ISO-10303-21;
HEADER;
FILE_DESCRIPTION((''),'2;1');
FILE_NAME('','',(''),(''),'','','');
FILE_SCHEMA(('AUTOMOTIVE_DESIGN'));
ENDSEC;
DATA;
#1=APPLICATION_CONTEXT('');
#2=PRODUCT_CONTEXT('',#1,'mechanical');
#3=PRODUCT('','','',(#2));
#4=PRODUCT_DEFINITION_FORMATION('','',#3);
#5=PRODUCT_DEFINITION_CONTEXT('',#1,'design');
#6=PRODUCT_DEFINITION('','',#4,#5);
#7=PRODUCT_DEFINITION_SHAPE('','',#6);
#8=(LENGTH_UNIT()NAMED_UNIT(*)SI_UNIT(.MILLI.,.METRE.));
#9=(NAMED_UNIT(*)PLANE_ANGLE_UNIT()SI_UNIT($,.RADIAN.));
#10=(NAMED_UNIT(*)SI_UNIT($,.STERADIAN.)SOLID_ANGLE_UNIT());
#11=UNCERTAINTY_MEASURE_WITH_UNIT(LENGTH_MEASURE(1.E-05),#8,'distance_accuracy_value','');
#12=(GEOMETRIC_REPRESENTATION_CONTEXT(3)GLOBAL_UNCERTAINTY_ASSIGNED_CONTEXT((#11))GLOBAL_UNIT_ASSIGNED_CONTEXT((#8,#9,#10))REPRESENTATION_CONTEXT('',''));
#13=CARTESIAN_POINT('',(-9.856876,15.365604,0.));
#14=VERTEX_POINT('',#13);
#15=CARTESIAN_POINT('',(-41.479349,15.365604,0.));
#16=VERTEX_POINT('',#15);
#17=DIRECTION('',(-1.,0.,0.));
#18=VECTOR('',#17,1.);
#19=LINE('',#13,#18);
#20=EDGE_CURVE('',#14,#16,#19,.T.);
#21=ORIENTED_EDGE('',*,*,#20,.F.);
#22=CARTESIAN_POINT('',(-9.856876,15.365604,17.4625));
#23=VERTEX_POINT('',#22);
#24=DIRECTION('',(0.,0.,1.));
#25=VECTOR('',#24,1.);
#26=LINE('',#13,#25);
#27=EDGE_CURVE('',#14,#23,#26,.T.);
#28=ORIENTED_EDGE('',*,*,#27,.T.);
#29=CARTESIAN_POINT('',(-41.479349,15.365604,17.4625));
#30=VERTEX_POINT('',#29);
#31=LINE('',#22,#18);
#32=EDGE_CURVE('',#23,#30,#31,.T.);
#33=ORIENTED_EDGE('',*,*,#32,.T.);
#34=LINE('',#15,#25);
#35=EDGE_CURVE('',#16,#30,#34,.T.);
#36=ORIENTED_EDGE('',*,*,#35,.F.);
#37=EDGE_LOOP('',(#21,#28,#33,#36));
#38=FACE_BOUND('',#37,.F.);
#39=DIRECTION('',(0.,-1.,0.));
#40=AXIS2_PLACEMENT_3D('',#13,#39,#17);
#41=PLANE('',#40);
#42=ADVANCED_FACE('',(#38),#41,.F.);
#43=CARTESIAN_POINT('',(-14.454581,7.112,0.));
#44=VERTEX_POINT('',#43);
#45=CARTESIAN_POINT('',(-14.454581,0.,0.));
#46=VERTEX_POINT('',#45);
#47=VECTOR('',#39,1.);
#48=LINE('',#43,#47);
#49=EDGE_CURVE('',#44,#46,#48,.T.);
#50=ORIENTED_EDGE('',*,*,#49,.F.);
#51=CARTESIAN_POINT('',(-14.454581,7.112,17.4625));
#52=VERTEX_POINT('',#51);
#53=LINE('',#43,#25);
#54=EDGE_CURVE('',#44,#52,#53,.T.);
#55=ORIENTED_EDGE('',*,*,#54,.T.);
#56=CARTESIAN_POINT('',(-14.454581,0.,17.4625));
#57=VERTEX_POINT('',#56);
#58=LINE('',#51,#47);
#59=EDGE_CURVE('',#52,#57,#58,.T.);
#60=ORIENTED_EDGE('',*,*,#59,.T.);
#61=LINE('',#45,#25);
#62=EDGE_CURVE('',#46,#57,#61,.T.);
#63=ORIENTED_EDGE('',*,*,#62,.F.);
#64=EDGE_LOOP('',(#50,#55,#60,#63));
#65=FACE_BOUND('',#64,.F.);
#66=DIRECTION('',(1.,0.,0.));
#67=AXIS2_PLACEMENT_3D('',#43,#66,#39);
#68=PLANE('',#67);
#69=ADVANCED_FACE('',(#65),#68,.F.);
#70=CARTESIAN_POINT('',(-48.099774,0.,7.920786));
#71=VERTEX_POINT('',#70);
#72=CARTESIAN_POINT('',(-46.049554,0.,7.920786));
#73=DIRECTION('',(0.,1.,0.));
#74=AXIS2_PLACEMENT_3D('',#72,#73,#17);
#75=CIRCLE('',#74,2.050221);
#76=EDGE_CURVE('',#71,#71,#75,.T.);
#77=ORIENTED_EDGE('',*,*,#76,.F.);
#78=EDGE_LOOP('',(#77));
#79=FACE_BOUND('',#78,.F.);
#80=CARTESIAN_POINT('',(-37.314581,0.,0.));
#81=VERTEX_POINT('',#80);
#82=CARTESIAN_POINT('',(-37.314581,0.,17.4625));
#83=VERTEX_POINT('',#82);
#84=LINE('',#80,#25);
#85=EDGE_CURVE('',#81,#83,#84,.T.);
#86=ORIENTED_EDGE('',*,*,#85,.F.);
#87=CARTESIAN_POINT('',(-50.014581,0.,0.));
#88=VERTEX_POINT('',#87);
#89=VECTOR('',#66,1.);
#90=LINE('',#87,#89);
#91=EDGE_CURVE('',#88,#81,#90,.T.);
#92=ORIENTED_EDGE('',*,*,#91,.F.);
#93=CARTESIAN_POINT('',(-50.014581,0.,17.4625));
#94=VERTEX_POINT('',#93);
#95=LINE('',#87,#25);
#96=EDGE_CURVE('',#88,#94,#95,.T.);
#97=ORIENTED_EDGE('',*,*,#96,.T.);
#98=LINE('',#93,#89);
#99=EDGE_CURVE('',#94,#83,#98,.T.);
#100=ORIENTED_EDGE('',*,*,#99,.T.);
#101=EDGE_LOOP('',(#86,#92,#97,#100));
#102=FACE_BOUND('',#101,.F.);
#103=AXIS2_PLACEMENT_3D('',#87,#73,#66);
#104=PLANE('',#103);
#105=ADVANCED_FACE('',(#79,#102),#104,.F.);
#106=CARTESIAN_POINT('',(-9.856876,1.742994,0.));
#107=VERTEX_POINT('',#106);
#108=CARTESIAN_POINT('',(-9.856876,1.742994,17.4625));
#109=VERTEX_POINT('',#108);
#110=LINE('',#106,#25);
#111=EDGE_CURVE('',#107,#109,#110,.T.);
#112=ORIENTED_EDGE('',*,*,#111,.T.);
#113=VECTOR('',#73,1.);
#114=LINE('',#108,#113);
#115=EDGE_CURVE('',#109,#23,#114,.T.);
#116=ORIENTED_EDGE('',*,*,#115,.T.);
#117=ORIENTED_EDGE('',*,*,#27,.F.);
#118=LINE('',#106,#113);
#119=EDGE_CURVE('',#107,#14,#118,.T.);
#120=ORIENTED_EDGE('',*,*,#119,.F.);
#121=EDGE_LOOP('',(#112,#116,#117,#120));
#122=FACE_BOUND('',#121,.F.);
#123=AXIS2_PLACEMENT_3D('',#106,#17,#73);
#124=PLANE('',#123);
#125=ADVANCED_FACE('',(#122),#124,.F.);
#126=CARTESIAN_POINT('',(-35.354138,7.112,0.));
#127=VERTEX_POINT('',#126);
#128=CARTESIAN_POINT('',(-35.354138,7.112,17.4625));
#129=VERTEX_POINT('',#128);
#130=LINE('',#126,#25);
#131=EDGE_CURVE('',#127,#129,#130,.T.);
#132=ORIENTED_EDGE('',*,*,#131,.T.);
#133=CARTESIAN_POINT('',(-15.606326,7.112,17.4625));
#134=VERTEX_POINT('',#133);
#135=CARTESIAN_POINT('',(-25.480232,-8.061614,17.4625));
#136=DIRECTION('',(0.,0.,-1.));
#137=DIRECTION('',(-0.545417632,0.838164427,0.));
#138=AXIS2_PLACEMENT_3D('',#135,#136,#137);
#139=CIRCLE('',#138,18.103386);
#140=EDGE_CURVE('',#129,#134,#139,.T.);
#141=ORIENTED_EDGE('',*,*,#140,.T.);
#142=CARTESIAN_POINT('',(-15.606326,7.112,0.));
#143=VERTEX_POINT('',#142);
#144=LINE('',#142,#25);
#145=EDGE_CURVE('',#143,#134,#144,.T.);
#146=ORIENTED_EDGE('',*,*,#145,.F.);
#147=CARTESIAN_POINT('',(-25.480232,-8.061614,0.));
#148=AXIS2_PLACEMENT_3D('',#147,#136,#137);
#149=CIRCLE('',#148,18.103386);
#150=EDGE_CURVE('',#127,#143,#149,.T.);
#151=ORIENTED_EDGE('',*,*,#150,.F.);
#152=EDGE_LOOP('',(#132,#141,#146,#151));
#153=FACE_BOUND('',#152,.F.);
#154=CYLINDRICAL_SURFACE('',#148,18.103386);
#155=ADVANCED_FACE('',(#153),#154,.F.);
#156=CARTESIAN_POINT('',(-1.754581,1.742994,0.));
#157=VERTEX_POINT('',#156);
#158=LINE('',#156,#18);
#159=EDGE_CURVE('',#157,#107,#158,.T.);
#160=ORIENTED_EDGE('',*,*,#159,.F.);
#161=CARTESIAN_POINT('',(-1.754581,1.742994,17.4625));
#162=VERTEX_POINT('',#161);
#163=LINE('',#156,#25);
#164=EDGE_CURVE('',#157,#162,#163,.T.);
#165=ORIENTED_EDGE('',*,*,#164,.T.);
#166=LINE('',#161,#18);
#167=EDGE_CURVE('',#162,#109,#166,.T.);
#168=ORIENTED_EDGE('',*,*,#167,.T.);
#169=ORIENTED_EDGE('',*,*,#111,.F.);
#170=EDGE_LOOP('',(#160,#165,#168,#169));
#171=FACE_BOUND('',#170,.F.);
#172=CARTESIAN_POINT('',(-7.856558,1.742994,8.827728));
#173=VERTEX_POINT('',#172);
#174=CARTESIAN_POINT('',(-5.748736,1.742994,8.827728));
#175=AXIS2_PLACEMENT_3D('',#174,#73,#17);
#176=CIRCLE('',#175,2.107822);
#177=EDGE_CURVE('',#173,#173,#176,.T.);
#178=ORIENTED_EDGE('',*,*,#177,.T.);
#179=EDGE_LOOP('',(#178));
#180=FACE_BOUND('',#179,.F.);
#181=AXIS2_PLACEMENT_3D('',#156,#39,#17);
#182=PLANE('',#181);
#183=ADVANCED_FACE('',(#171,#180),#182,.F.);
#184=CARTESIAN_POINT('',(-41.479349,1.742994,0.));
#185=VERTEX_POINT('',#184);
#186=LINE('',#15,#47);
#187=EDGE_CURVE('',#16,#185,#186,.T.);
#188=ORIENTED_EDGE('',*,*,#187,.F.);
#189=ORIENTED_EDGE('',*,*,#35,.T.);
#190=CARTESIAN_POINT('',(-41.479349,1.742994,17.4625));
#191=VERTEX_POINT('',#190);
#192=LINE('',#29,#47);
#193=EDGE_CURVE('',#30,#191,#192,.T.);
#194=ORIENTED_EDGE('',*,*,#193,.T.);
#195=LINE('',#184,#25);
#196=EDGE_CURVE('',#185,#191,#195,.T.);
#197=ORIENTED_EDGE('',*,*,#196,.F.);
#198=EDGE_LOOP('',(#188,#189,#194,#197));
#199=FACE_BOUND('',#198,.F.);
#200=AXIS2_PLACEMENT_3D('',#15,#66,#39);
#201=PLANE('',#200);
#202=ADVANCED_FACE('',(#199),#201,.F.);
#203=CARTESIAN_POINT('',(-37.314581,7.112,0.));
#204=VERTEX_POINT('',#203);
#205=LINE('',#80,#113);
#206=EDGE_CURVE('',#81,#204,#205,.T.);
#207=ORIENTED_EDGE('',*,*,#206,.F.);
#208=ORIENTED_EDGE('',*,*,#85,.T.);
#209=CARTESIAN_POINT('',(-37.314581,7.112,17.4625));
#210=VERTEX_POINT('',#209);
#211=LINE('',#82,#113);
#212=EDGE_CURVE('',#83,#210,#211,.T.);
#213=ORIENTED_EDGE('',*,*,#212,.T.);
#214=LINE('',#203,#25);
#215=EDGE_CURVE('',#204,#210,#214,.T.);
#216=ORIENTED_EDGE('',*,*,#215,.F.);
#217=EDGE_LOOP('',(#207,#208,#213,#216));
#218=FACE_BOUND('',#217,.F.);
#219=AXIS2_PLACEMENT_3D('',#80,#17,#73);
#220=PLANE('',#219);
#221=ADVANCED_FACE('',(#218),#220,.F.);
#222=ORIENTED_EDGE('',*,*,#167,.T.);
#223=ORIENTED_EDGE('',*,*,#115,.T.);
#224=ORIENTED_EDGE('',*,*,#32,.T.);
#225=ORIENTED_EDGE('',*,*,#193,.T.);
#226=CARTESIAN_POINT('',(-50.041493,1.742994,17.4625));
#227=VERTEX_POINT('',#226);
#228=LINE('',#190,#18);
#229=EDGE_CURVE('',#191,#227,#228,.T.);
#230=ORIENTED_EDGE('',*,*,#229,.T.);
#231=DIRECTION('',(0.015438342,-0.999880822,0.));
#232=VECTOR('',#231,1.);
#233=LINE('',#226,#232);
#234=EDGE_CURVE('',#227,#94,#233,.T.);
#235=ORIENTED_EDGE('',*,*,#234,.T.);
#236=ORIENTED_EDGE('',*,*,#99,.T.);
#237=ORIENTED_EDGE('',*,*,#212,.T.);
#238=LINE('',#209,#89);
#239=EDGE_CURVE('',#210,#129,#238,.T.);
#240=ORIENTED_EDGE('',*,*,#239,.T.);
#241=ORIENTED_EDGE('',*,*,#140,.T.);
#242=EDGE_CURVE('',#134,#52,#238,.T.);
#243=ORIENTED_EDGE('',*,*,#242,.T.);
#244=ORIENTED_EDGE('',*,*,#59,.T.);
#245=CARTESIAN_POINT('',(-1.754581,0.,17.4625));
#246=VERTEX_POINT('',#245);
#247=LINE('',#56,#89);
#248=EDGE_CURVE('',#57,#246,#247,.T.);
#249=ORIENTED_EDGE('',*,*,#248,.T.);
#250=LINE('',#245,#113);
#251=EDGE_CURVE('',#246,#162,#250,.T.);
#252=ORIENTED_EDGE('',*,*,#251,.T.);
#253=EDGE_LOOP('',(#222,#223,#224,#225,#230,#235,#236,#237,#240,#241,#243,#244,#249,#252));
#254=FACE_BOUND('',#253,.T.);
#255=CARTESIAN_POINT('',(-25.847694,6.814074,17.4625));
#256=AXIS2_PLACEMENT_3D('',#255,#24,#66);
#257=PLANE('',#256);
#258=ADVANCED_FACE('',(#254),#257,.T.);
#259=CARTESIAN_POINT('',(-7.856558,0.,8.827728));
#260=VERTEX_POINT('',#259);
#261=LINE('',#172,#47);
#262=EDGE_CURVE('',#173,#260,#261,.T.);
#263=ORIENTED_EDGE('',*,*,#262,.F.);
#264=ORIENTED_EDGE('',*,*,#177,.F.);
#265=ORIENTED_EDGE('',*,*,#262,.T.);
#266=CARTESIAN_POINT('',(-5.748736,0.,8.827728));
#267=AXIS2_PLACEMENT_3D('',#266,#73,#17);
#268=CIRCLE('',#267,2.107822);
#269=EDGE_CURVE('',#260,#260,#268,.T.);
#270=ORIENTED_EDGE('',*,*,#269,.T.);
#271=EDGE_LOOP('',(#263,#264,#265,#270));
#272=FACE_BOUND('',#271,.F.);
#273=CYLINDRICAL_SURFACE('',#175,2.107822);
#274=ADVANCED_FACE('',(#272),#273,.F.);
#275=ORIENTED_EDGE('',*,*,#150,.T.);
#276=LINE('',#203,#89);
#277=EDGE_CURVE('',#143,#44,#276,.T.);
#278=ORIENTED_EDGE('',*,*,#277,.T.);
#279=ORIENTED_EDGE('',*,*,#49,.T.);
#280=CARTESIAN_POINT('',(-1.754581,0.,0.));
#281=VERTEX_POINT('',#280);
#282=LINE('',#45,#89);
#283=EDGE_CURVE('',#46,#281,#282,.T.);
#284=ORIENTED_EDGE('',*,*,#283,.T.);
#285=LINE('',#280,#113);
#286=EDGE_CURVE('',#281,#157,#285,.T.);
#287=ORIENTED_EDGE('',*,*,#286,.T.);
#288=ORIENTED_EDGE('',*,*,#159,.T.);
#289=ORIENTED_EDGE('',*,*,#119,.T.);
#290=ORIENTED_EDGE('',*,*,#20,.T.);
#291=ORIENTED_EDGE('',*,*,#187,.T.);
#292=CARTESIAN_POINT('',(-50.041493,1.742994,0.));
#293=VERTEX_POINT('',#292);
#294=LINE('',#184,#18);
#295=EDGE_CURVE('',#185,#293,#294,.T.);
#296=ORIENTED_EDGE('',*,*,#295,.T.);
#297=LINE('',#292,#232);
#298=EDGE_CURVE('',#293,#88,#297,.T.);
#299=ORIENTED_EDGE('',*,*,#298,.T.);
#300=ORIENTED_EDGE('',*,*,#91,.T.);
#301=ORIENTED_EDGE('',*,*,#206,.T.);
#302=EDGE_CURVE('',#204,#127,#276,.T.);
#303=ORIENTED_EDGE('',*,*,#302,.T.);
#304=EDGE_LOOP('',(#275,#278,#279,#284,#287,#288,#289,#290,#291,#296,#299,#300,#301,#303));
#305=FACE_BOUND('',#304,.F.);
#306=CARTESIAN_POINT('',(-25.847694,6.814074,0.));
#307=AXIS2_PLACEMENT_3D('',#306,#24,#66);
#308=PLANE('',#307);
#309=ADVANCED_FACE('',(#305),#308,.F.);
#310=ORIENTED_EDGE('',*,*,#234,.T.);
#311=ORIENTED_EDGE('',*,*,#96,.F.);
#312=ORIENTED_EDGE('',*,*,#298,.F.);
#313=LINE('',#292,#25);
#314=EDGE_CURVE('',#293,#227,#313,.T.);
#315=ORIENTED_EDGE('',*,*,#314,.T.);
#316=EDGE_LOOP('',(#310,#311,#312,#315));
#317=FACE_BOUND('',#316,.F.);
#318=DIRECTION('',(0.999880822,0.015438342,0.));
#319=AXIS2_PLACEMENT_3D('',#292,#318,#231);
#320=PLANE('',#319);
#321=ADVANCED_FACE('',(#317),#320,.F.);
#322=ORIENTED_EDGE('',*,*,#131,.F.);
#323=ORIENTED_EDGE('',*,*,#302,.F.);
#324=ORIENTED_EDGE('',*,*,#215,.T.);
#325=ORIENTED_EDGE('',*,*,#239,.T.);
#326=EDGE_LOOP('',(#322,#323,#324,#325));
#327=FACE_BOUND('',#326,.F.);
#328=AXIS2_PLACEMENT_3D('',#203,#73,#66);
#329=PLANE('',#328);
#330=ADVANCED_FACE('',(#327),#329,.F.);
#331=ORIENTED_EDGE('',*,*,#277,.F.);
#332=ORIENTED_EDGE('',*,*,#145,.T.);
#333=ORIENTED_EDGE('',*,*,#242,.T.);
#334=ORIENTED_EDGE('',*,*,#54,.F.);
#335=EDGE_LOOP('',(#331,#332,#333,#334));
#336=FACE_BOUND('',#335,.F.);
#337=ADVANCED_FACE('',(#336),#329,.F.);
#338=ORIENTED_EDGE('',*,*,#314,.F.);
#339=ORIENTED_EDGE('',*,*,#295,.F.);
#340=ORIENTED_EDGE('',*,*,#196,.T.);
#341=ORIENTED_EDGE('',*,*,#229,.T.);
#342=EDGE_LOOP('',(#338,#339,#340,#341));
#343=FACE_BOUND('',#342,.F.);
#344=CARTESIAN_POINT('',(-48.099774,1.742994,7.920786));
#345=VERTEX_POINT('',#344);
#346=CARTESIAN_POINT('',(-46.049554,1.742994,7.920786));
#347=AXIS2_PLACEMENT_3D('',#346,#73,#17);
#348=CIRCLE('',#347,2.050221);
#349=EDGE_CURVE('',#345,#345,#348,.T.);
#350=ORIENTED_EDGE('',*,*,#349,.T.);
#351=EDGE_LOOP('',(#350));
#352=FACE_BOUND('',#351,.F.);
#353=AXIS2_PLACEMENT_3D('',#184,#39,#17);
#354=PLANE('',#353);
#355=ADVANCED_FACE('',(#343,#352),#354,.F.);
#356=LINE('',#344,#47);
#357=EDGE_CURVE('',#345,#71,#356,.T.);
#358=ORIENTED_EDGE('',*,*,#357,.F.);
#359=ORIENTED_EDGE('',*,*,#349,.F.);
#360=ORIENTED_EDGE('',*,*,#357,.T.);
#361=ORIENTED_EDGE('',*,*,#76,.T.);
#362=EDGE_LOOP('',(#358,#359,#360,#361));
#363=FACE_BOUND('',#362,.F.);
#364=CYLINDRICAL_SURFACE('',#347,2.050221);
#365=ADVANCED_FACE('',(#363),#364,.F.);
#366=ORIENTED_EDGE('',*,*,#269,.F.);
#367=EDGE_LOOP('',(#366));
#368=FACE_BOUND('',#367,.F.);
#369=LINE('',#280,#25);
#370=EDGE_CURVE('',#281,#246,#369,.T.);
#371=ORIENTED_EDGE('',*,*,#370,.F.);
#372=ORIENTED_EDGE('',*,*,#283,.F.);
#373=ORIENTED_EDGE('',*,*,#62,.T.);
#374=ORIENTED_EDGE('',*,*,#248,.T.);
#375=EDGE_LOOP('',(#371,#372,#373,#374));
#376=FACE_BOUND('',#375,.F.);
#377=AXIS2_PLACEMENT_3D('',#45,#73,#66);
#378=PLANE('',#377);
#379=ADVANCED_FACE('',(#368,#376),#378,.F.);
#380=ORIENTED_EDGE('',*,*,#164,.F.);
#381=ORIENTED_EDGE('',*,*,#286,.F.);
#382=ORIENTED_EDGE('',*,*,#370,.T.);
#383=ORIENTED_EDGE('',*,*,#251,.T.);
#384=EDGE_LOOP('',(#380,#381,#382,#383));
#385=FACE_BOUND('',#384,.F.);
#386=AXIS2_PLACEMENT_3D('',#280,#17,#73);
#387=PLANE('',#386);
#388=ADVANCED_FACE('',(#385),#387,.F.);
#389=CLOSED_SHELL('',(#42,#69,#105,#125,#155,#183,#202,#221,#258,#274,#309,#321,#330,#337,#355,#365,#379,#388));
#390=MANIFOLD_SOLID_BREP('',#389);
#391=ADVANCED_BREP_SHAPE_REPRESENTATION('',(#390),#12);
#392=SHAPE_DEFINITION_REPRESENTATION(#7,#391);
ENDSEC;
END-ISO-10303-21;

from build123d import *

# Parameters (mm, degrees)
F1_DEPTH = 17.4625
F2_R     = 2.1078217737
F3_DEPTH = 25.4
F4_R     = 2.0502205364
F5_DEPTH = 25.4
F7_DEPTH = 25.4


# Not quite as in the source:
# - a length typed as a fraction of an inch, garbled in the dataset ("3 / 203.2 mm" for 3/8 in), is restored
# - a feature names something its author has since deleted; it is built from what else it names


with BuildPart() as f1:
    # F0 (on Top) → F1 (new body)
    with BuildSketch(Plane.XY):
        Polygon((-14.4545807227, 0), (-1.7545807227, 0), (-1.7545807227, 1.7429942964), (-9.8568759859, 1.7429942964), (-9.8568759859, 15.3656043112), (-41.4793491364, 15.3656043112), (-41.4793491364, 1.7429942964), (-50.0414928719, 1.7429942964), (-50.0145807227, 0), (-37.3145807227, 0), (-37.3145807227, 7.112), (-14.4545807227, 7.112), align=None)
    extrude(amount=F1_DEPTH)

    # F2 (on face) → F3 (cut)
    with BuildSketch(Plane(origin=(0, 1.7429942964, 0), x_dir=(-1, 0, 0), z_dir=(0, 1, 0))):
        with Locations((5.7487357408, 8.8277282193)):
            Circle(F2_R)
    extrude(amount=-F3_DEPTH, mode=Mode.SUBTRACT)

    # F4 (on face) → F5 (cut)
    with BuildSketch(Plane(origin=(0, 1.7429942964, 0), x_dir=(-1, 0, 0), z_dir=(0, 1, 0))):
        with Locations((46.049553901, 7.9207858071)):
            Circle(F4_R)
    extrude(amount=-F5_DEPTH, mode=Mode.SUBTRACT)

    # F6 (on face) → F7 (cut)
    with BuildSketch(Plane(origin=(0, 0, 0), x_dir=(1, 0, 0), z_dir=(0, 0, -1))):
        with BuildLine():
            Line((-15.6063264408, -7.112), (-35.3541379623, -7.112))
            ThreePointArc((-35.3541379623, -7.112), (-25.4802322015, -10.0417717978), (-15.6063264408, -7.112))
        make_face()
    extrude(amount=-F7_DEPTH, mode=Mode.SUBTRACT)


solid = f1.part
